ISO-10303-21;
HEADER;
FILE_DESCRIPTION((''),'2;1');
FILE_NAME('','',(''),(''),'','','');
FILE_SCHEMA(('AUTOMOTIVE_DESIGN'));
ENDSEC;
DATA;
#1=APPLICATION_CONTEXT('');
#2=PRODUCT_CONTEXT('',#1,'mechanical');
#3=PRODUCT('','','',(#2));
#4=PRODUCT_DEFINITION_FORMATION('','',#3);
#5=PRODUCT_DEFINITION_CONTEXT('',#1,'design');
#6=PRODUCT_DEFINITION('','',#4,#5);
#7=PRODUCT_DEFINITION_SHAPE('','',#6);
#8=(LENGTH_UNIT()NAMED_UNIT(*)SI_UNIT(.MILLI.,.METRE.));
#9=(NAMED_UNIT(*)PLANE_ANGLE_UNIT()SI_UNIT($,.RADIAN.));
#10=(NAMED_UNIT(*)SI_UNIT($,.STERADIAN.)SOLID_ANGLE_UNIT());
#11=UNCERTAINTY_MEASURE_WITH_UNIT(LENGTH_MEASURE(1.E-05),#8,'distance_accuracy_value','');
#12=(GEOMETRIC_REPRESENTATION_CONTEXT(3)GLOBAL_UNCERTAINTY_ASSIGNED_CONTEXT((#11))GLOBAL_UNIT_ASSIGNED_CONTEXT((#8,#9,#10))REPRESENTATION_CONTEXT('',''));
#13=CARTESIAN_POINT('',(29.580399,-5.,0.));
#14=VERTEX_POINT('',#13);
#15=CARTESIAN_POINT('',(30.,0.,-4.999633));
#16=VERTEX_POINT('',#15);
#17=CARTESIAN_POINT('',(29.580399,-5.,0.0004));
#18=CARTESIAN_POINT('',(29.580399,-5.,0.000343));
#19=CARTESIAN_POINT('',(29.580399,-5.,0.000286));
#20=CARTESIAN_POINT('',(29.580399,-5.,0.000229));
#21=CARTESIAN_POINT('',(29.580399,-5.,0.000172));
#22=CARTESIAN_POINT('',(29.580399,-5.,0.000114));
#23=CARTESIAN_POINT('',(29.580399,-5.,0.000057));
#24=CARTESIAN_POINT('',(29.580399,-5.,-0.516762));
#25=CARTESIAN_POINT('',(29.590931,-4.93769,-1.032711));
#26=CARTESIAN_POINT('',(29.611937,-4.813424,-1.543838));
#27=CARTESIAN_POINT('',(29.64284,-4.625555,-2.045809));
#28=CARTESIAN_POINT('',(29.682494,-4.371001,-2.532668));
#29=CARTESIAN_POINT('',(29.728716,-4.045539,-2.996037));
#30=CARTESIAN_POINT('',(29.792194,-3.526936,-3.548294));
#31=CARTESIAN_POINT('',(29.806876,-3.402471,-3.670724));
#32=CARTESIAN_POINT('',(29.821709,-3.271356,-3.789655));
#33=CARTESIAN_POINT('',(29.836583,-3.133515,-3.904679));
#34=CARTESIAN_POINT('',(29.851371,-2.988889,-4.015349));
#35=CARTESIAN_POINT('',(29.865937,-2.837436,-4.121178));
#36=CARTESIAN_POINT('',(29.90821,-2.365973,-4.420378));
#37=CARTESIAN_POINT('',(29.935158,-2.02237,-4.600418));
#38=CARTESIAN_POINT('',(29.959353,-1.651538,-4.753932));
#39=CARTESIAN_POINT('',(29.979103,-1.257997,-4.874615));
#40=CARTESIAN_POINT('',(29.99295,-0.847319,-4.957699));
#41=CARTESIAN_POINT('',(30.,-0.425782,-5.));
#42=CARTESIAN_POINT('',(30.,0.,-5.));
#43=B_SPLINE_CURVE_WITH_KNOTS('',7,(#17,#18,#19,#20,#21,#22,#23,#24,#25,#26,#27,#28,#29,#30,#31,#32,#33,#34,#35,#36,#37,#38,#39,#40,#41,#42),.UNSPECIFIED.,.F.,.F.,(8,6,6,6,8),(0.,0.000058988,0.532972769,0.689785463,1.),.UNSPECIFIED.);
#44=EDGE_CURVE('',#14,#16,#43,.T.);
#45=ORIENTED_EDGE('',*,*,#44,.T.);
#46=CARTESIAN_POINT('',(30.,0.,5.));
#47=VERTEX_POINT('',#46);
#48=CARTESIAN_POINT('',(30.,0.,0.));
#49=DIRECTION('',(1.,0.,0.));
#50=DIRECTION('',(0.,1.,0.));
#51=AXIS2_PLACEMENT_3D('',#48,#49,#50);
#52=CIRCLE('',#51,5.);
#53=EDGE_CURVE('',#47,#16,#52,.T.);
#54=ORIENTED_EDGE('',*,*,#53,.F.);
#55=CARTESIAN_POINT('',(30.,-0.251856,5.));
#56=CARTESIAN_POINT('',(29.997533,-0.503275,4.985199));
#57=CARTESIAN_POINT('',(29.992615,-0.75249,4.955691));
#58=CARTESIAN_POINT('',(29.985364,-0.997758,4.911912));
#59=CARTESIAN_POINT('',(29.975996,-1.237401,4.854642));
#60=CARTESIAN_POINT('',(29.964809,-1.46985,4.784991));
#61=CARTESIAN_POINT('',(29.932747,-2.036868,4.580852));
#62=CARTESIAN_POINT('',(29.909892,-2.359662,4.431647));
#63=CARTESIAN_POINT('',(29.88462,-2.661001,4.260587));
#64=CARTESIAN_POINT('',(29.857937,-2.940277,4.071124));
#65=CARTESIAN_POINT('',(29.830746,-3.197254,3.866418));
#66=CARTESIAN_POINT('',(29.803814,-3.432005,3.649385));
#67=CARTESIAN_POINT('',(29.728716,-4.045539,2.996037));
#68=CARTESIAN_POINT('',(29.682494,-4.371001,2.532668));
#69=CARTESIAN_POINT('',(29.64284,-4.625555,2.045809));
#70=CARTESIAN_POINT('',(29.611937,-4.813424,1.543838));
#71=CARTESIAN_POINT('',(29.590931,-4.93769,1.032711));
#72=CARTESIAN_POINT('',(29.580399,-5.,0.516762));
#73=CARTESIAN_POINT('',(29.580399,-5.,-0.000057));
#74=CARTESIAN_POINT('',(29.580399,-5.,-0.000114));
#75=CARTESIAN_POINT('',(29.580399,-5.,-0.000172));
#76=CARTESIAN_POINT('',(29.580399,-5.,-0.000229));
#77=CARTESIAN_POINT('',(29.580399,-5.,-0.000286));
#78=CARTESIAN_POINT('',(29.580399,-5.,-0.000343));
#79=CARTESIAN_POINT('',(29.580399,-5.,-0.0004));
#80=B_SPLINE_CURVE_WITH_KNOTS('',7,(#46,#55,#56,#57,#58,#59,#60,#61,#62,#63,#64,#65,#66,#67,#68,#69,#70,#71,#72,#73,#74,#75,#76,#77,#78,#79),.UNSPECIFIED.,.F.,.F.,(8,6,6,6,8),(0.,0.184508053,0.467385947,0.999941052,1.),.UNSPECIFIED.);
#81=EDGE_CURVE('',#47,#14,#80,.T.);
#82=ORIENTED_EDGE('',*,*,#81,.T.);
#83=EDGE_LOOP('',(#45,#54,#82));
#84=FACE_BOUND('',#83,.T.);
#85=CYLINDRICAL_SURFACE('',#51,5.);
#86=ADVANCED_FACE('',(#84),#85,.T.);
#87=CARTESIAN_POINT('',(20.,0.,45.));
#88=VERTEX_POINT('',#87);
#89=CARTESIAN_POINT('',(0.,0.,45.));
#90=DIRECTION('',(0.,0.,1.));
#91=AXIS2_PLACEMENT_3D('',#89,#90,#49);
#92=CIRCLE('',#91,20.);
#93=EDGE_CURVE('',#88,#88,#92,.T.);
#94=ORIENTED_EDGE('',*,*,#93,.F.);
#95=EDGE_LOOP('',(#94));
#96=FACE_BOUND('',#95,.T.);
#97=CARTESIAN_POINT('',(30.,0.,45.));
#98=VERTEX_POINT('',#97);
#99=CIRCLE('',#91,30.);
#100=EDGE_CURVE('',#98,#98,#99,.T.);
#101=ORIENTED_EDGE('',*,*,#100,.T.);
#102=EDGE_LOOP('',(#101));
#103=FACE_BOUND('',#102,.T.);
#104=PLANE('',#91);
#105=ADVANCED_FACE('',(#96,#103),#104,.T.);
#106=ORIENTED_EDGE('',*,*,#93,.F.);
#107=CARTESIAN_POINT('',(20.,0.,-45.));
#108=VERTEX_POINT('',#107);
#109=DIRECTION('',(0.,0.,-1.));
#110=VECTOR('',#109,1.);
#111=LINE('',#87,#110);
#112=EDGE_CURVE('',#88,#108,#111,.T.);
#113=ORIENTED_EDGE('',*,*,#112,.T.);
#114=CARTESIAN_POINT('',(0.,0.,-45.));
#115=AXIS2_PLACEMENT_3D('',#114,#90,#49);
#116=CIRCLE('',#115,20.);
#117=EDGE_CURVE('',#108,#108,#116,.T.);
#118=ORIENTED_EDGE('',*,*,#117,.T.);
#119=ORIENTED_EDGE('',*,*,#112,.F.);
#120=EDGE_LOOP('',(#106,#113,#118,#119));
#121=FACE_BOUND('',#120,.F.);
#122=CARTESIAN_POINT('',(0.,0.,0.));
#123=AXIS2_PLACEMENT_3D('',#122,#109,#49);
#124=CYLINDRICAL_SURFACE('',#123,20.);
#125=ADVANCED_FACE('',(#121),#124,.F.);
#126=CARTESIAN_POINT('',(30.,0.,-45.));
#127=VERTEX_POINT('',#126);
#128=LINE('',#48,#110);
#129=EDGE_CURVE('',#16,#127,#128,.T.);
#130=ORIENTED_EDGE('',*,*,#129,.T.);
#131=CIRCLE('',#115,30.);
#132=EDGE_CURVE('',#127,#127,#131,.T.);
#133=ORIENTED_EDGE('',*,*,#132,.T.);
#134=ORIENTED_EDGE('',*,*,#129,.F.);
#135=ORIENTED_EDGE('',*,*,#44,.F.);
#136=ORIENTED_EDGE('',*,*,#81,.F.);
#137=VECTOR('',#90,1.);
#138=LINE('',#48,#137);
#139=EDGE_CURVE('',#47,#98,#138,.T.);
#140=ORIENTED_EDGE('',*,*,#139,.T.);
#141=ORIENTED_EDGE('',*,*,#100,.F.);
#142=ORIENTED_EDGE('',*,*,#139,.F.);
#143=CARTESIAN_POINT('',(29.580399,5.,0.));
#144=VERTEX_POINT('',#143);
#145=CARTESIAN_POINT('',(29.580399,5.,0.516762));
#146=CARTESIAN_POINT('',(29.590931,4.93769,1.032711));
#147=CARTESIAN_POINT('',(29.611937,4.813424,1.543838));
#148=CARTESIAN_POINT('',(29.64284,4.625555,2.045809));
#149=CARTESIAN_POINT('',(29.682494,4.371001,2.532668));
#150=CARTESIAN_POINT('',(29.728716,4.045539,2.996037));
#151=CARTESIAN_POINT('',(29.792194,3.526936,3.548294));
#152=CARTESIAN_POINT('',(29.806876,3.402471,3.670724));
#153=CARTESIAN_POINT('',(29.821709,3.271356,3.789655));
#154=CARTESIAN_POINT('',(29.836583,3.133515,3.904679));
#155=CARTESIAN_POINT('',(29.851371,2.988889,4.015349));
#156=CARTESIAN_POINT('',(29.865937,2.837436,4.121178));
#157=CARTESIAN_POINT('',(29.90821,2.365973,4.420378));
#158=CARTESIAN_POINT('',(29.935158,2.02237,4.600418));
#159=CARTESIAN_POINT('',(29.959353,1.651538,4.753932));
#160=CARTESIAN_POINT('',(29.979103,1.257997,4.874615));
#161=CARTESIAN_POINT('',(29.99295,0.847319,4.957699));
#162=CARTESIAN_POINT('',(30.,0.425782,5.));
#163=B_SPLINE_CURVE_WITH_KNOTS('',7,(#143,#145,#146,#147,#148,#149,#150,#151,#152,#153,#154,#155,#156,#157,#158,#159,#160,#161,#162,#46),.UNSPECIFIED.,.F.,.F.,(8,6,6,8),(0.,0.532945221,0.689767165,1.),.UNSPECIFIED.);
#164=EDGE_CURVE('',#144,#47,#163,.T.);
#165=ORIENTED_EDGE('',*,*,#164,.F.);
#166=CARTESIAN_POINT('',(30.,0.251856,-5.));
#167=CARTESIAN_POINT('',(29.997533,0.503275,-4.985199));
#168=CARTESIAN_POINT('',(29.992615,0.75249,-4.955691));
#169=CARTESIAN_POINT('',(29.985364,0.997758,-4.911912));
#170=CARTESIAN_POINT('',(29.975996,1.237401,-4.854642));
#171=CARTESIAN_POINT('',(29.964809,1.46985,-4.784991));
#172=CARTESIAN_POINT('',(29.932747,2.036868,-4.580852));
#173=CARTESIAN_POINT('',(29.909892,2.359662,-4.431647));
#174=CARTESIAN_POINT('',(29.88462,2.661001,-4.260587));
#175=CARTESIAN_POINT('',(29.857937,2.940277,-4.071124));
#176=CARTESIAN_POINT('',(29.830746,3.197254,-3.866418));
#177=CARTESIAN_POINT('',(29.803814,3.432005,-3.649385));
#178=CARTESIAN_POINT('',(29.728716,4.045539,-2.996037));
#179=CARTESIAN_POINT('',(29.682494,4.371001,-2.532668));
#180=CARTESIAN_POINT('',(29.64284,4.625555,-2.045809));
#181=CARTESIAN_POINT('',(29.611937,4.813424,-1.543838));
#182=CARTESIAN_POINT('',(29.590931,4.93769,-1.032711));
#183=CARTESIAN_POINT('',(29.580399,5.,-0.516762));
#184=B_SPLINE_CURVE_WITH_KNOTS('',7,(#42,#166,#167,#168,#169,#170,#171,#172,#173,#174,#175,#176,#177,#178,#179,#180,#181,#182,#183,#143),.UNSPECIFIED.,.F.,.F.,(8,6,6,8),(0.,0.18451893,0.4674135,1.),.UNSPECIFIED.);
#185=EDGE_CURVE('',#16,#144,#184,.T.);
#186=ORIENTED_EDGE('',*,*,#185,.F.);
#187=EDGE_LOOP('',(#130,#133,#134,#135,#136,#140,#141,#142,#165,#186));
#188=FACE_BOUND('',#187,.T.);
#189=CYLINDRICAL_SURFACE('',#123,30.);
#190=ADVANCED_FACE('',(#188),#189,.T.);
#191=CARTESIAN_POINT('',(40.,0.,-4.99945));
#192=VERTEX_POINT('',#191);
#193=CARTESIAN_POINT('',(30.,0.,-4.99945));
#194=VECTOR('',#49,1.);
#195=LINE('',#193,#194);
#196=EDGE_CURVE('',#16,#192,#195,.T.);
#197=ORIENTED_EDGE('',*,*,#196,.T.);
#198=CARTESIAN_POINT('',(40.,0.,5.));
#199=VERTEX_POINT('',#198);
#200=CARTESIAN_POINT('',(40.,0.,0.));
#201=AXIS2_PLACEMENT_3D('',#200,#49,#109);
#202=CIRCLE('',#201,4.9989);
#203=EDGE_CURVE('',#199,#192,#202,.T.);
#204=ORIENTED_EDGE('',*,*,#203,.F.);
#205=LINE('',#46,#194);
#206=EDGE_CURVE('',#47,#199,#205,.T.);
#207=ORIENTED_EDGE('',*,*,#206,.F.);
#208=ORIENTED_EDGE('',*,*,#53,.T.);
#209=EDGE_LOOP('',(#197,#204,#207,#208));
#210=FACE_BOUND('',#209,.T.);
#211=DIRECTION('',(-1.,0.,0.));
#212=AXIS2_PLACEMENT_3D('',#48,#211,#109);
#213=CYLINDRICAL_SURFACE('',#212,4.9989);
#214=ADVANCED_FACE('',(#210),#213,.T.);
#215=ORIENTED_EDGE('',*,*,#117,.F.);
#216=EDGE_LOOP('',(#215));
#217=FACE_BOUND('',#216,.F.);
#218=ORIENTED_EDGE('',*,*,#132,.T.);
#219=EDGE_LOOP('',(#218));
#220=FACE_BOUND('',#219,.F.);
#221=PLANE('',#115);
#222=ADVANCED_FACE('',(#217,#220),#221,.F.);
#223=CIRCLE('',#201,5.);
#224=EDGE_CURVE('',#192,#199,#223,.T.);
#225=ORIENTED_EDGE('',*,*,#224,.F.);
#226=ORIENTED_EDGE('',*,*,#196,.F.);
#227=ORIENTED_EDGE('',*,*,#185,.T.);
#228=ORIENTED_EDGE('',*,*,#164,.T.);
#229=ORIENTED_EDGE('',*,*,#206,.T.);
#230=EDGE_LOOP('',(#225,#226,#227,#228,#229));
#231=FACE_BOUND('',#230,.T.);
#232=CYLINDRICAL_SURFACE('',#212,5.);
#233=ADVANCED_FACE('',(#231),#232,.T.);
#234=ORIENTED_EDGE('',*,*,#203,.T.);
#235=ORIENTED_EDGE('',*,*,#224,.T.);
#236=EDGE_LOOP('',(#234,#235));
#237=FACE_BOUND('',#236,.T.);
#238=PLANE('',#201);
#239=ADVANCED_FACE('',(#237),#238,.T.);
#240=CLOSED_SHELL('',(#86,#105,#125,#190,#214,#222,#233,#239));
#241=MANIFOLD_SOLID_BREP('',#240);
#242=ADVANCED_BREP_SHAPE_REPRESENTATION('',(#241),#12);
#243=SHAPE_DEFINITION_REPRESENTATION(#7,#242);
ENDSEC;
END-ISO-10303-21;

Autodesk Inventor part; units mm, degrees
ref_plane "YZ Plane" through (0, 0, 0) normal (1, 0, 0) x (0, 1, 0)
ref_plane "XZ Plane" through (0, 0, 0) normal (0, 1, 0) x (-1, 0, 0)
sketch "Эскиз1" plane through (0, 0, 0) normal (0, 0, 1) x (1, 0, 0)
  circle A0 centre (0, 0) radius 20
  circle A1 centre (0, 0) radius 30
  dimension "d0" = 40
  dimension "d1" = 10
extrude "Выдавливание1" add sketch "Эскиз1" along normal mid plane 90
ref_plane "РабПлоскость1" through (30, 0, 0) normal (1, 0, 0) x (0, 1, 0)
sketch "Эскиз4" plane through (30, 0, 0) normal (1, 0, 0) x (0, 1, 0)
  circle A0 centre (0, 0) radius 5
  dimension "d5" = 10
extrude "Выдавливание2" add sketch "Эскиз4" against normal up to surface
sketch "Эскиз6" plane through (30, 0, 0) normal (1, 0, 0) x (0, 0, -1)
  arc A0 (5, 0) -> (-5, 0) centre (0, 0) ccw projected
  circle A1 centre (0, 0) radius 4.9989
  point P0 (-10, 0)
  point P1 (10, 0)
extrude "Выдавливание3" add sketch "Эскиз6" along normal blind 10
properties part number "стакан_v1"
